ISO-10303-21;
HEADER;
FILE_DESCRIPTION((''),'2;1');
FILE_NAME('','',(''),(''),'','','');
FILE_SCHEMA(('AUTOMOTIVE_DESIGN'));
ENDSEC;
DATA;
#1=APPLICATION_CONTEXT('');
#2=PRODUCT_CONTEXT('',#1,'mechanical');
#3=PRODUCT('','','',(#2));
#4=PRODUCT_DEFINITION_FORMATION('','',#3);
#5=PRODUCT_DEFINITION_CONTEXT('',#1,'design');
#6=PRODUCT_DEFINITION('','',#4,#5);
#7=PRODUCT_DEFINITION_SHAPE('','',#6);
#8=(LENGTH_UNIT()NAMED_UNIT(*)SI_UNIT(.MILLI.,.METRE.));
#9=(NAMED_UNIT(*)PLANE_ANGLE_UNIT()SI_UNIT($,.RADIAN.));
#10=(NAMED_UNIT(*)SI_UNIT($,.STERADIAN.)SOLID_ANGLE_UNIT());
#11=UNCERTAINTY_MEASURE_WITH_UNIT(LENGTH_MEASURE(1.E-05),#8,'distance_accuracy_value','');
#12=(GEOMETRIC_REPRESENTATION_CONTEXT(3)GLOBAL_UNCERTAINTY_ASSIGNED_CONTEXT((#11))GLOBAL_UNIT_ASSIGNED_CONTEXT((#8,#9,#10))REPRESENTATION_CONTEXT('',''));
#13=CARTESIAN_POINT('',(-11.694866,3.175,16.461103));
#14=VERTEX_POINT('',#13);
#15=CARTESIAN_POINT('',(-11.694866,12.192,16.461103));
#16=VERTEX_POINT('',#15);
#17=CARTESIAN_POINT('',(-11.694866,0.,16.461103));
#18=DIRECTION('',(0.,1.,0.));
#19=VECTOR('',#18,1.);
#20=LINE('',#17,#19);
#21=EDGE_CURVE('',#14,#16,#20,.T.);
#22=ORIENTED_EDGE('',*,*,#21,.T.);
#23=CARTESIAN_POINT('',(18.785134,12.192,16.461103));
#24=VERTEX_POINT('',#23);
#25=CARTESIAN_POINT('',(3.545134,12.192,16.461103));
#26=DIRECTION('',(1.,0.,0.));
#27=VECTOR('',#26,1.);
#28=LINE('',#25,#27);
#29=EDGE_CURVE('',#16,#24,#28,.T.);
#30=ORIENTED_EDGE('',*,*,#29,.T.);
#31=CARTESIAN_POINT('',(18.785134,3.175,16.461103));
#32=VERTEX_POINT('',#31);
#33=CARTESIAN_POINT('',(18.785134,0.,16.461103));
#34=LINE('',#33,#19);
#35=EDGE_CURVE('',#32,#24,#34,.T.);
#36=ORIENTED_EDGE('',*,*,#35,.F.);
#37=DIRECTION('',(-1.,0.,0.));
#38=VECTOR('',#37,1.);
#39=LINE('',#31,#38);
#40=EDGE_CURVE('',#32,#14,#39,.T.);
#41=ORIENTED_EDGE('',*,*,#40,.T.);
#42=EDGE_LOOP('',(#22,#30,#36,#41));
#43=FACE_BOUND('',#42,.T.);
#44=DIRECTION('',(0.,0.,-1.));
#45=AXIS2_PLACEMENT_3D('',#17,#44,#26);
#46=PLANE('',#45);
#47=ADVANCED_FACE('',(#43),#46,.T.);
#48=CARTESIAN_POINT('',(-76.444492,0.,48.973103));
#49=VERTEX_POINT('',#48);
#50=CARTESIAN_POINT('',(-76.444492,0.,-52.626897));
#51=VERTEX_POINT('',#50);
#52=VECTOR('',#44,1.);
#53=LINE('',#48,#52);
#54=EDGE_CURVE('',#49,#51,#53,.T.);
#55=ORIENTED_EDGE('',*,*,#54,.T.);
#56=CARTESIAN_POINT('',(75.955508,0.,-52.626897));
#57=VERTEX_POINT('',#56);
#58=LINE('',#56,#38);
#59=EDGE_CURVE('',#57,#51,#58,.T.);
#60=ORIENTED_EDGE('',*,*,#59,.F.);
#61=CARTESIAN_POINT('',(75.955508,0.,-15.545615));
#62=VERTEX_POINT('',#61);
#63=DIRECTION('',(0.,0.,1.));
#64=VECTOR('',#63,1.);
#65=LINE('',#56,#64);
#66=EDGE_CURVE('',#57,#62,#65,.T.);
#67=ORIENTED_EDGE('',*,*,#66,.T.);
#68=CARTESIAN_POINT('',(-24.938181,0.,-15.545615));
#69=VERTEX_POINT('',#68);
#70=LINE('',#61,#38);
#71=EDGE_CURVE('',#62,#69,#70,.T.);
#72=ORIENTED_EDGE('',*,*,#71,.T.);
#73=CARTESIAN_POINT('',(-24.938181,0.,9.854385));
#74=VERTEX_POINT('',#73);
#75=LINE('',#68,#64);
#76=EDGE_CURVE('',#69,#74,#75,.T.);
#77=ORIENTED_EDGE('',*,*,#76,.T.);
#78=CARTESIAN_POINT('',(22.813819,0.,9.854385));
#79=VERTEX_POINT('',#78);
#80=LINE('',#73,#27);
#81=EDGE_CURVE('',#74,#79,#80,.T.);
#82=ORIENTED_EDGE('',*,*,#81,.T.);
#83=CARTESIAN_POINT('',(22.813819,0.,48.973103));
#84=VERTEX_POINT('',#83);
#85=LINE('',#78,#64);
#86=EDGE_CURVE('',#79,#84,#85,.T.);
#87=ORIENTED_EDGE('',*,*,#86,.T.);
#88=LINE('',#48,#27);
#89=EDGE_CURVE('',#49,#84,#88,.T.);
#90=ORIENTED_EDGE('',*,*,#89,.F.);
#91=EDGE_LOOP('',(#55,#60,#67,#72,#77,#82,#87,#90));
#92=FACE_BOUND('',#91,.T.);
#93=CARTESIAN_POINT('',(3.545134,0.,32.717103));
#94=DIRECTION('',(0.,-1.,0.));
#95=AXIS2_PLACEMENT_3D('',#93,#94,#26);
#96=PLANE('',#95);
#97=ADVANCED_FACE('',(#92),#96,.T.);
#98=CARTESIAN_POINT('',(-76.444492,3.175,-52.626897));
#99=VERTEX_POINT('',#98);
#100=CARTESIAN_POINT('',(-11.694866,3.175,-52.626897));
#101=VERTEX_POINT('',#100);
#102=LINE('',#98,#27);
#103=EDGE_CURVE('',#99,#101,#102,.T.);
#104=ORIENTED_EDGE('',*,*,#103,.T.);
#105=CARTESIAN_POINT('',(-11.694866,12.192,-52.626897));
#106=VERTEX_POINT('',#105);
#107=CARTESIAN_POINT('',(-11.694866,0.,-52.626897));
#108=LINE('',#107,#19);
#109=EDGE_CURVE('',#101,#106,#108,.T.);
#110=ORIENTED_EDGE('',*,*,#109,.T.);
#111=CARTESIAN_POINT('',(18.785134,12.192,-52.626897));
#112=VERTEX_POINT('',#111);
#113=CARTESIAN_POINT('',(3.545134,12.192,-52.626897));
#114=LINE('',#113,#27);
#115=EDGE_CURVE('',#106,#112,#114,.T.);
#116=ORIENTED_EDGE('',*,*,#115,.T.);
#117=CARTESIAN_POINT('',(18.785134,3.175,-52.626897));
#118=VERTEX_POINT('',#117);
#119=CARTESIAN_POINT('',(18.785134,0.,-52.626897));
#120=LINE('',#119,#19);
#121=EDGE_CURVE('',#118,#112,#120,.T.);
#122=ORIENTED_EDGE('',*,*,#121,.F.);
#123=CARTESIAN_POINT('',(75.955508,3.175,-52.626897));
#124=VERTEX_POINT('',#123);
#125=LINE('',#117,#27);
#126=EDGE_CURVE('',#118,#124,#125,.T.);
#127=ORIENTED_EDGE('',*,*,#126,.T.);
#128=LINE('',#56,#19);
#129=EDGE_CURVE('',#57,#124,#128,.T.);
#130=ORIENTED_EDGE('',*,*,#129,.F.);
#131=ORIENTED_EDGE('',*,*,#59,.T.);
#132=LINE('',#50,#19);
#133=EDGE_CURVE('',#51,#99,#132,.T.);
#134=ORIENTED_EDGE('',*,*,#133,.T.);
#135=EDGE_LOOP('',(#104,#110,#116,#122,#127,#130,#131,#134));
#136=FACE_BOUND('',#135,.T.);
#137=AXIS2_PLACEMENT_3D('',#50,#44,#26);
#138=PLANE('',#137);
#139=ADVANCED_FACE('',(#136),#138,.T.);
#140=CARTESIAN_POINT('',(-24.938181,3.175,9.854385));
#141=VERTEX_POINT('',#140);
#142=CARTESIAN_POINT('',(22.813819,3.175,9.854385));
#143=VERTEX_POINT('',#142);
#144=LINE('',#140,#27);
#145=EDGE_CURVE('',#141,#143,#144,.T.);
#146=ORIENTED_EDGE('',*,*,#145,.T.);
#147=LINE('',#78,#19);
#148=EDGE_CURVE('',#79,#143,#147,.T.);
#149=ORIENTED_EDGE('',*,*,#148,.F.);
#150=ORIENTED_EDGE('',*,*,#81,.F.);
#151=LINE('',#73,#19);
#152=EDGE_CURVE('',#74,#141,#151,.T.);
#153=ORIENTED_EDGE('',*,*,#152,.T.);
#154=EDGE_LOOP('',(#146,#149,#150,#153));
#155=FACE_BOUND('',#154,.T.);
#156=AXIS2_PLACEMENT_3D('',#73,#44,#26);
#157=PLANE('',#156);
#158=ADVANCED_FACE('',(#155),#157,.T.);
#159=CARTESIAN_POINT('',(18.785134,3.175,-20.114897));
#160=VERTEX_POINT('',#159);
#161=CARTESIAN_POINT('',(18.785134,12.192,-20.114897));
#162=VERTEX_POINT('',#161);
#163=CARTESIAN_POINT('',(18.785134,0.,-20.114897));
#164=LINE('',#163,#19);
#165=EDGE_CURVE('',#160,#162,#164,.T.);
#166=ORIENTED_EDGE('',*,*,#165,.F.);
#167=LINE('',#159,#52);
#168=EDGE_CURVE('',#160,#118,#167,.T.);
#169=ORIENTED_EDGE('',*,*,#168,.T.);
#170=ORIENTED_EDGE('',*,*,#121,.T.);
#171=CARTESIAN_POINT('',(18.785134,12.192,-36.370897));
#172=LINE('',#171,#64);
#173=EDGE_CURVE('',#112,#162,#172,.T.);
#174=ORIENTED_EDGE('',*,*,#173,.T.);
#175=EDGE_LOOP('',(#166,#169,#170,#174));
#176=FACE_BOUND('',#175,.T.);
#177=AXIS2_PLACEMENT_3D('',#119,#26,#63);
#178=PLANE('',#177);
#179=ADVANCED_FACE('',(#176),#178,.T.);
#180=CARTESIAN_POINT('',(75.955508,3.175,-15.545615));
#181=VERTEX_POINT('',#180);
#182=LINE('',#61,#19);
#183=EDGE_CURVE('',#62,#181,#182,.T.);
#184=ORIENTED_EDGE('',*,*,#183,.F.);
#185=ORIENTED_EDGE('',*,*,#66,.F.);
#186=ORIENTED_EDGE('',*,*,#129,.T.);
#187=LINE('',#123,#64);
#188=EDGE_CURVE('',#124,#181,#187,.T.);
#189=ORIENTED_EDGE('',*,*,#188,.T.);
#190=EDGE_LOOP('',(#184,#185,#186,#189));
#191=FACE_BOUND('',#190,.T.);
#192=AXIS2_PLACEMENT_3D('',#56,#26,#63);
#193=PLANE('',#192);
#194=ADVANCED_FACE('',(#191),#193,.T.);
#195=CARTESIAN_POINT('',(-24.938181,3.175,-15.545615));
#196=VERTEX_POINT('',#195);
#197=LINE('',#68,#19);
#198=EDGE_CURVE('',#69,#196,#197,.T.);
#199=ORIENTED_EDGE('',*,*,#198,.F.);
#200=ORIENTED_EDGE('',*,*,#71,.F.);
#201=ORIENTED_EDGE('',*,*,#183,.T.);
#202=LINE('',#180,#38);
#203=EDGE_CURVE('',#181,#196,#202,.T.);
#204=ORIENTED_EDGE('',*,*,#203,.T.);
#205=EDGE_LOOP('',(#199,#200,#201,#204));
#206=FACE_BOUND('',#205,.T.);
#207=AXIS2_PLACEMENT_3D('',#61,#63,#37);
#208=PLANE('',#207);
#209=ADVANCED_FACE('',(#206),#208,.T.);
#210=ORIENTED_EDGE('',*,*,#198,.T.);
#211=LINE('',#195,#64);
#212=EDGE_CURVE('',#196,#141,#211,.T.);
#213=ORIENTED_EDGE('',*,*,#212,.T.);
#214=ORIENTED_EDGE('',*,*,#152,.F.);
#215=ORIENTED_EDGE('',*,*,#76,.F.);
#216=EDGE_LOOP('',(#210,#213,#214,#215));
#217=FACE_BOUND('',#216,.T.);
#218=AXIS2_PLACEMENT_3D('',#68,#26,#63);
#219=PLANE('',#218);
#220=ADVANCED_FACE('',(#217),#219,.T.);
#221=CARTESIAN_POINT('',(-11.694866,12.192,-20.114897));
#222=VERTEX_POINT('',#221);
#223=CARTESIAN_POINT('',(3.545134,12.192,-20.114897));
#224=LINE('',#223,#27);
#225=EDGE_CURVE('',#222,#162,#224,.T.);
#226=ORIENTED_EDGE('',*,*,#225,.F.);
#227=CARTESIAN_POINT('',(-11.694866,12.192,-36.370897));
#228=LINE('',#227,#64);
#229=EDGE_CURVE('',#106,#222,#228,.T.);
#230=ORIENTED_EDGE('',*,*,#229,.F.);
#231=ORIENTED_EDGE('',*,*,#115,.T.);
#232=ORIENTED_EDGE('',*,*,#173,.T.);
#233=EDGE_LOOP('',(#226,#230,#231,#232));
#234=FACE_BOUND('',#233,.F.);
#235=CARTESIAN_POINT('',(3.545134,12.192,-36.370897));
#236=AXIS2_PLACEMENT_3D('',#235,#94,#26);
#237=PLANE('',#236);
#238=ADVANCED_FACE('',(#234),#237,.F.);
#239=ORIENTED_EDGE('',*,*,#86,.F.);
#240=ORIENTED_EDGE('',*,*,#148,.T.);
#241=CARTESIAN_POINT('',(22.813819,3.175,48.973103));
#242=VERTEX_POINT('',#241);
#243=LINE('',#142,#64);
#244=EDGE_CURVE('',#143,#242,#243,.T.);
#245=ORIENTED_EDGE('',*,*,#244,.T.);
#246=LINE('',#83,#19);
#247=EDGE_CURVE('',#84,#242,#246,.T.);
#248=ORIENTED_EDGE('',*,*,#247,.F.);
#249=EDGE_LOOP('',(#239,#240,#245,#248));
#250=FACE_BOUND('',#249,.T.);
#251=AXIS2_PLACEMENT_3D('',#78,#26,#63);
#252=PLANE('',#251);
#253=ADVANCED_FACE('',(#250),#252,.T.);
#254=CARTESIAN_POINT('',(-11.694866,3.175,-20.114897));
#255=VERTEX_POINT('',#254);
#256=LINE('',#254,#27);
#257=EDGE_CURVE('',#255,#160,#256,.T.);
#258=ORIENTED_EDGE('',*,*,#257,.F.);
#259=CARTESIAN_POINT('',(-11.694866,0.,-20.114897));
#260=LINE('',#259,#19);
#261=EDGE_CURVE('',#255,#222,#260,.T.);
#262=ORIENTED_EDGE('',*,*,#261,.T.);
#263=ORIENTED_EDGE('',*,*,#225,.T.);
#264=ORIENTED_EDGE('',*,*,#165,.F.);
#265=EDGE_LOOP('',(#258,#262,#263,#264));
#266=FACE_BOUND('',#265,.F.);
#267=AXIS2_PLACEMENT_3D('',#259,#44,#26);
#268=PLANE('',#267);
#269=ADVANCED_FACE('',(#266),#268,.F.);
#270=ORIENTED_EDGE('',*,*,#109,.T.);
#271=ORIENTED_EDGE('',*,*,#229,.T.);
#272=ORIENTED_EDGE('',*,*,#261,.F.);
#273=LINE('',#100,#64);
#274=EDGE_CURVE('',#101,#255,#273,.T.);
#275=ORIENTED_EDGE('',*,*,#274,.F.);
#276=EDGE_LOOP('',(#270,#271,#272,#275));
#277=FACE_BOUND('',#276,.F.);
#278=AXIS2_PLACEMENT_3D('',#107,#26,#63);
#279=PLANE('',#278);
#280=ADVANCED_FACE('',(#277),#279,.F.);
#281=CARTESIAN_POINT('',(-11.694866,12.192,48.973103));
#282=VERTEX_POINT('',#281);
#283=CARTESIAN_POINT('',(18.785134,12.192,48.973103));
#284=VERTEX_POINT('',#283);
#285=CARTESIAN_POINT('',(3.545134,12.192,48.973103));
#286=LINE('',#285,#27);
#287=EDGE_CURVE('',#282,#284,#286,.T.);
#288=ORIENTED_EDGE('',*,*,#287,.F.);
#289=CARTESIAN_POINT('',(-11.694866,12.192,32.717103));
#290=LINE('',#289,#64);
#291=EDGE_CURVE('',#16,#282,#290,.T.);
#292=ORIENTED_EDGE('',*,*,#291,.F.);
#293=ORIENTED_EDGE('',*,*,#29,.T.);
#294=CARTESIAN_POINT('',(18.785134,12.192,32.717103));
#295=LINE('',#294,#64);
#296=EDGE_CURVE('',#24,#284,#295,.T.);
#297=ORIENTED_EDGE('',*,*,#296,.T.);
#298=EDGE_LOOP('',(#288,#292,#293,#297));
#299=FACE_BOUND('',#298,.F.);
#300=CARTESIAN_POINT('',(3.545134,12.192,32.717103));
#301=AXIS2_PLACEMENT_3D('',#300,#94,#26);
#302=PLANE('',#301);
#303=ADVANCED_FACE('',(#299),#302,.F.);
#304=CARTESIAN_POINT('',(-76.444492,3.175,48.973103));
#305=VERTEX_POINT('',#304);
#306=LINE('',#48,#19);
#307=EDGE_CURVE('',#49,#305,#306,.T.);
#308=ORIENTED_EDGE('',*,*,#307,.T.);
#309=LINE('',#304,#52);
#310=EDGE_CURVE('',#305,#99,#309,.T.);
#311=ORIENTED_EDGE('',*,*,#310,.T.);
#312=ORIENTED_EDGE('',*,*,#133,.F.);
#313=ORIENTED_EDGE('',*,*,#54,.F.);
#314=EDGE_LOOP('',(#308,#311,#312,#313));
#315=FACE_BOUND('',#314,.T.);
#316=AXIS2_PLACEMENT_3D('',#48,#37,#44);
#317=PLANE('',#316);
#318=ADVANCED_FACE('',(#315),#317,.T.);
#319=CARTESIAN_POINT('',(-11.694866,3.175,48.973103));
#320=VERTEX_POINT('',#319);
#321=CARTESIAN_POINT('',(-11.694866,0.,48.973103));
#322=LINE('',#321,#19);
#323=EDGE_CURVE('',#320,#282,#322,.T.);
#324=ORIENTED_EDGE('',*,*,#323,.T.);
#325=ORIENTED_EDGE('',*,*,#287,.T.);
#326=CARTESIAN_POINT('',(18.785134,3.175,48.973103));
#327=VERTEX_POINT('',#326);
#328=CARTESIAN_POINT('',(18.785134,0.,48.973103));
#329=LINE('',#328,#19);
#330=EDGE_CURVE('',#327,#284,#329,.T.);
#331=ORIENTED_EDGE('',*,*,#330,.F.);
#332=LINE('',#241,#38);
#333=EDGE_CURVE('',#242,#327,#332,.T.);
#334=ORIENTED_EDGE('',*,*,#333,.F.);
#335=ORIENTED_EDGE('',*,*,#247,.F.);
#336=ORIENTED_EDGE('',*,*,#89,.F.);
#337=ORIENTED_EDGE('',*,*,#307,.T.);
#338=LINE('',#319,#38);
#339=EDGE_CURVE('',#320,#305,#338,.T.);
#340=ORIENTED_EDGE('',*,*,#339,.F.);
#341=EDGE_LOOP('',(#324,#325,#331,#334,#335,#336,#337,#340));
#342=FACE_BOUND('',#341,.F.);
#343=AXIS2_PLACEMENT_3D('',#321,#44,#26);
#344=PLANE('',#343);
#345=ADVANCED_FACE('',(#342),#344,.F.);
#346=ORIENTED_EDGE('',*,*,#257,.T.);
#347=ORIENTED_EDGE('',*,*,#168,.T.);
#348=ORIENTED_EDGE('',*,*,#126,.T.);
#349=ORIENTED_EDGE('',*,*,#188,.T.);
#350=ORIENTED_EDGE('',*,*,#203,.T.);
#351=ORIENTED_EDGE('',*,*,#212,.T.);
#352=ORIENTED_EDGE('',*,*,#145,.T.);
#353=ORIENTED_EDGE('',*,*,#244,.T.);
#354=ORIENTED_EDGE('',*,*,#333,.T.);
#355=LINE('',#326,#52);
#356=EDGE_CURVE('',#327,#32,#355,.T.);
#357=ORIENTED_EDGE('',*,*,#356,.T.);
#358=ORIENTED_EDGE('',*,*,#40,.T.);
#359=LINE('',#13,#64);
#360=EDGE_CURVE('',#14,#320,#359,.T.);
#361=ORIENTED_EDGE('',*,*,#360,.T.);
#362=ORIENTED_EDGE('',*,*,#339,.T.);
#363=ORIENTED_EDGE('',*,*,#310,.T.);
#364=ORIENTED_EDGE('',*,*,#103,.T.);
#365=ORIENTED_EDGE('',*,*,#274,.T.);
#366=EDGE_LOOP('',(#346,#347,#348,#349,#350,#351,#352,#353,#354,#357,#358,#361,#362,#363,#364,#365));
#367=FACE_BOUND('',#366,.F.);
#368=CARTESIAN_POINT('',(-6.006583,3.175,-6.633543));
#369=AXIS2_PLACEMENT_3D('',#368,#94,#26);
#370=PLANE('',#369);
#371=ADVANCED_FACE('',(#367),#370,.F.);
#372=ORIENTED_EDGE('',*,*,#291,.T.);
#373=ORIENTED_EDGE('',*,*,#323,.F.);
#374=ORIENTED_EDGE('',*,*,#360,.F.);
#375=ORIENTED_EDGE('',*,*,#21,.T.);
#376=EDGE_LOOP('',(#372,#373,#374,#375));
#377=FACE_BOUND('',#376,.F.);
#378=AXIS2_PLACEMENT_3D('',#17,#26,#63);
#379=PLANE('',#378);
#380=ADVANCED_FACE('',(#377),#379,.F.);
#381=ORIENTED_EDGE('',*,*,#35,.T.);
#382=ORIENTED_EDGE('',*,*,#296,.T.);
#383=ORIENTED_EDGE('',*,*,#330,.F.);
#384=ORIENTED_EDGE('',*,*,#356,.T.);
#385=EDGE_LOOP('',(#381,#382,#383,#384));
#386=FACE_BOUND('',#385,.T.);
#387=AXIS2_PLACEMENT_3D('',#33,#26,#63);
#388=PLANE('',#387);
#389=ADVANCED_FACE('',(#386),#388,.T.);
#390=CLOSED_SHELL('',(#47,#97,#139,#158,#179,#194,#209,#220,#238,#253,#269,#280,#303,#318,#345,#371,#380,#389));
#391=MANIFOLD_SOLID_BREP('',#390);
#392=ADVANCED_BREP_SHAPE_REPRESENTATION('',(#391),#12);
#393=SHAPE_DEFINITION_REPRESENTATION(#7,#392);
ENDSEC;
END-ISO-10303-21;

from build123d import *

# Parameters (mm, degrees)
F1_DEPTH = 3.175
F0_W     = 30.48
F0_H     = 32.512
F2_DEPTH = 12.192


with BuildPart() as f1:
    # F0 (on Front) → F1 (new body)
    with BuildSketch(Plane.XZ):
        Polygon((-11.6948662326, 48.9731033504), (-76.444491744, 48.9731033504), (-76.444491744, -52.6268966496), (-11.6948662326, -52.6268966496), (-11.6948662326, -20.1148966496), (18.7851337674, -20.1148966496), (18.7851337674, -52.6268966496), (75.955508256, -52.6268966496), (75.955508256, -15.5456149951), (22.8138189573, -15.5456149951), (-24.9381810427, -15.5456149951), (-24.9381810427, 9.8543850049), (22.8138189573, 9.8543850049), (22.8138189573, 48.9731033504), (18.7851337674, 48.9731033504), (18.7851337674, 16.4611033504), (-11.6948662326, 16.4611033504), align=None)
    extrude(amount=-F1_DEPTH)

    # F0 (on Front) → F2 (join)
    with BuildSketch(Plane.XZ):
        with Locations((3.5451337674, 32.7171033504)):
            Rectangle(F0_W, F0_H)
        with Locations((3.5451337674, -36.3708966496)):
            Rectangle(F0_W, F0_H)
    extrude(amount=-F2_DEPTH)


solid = f1.part
